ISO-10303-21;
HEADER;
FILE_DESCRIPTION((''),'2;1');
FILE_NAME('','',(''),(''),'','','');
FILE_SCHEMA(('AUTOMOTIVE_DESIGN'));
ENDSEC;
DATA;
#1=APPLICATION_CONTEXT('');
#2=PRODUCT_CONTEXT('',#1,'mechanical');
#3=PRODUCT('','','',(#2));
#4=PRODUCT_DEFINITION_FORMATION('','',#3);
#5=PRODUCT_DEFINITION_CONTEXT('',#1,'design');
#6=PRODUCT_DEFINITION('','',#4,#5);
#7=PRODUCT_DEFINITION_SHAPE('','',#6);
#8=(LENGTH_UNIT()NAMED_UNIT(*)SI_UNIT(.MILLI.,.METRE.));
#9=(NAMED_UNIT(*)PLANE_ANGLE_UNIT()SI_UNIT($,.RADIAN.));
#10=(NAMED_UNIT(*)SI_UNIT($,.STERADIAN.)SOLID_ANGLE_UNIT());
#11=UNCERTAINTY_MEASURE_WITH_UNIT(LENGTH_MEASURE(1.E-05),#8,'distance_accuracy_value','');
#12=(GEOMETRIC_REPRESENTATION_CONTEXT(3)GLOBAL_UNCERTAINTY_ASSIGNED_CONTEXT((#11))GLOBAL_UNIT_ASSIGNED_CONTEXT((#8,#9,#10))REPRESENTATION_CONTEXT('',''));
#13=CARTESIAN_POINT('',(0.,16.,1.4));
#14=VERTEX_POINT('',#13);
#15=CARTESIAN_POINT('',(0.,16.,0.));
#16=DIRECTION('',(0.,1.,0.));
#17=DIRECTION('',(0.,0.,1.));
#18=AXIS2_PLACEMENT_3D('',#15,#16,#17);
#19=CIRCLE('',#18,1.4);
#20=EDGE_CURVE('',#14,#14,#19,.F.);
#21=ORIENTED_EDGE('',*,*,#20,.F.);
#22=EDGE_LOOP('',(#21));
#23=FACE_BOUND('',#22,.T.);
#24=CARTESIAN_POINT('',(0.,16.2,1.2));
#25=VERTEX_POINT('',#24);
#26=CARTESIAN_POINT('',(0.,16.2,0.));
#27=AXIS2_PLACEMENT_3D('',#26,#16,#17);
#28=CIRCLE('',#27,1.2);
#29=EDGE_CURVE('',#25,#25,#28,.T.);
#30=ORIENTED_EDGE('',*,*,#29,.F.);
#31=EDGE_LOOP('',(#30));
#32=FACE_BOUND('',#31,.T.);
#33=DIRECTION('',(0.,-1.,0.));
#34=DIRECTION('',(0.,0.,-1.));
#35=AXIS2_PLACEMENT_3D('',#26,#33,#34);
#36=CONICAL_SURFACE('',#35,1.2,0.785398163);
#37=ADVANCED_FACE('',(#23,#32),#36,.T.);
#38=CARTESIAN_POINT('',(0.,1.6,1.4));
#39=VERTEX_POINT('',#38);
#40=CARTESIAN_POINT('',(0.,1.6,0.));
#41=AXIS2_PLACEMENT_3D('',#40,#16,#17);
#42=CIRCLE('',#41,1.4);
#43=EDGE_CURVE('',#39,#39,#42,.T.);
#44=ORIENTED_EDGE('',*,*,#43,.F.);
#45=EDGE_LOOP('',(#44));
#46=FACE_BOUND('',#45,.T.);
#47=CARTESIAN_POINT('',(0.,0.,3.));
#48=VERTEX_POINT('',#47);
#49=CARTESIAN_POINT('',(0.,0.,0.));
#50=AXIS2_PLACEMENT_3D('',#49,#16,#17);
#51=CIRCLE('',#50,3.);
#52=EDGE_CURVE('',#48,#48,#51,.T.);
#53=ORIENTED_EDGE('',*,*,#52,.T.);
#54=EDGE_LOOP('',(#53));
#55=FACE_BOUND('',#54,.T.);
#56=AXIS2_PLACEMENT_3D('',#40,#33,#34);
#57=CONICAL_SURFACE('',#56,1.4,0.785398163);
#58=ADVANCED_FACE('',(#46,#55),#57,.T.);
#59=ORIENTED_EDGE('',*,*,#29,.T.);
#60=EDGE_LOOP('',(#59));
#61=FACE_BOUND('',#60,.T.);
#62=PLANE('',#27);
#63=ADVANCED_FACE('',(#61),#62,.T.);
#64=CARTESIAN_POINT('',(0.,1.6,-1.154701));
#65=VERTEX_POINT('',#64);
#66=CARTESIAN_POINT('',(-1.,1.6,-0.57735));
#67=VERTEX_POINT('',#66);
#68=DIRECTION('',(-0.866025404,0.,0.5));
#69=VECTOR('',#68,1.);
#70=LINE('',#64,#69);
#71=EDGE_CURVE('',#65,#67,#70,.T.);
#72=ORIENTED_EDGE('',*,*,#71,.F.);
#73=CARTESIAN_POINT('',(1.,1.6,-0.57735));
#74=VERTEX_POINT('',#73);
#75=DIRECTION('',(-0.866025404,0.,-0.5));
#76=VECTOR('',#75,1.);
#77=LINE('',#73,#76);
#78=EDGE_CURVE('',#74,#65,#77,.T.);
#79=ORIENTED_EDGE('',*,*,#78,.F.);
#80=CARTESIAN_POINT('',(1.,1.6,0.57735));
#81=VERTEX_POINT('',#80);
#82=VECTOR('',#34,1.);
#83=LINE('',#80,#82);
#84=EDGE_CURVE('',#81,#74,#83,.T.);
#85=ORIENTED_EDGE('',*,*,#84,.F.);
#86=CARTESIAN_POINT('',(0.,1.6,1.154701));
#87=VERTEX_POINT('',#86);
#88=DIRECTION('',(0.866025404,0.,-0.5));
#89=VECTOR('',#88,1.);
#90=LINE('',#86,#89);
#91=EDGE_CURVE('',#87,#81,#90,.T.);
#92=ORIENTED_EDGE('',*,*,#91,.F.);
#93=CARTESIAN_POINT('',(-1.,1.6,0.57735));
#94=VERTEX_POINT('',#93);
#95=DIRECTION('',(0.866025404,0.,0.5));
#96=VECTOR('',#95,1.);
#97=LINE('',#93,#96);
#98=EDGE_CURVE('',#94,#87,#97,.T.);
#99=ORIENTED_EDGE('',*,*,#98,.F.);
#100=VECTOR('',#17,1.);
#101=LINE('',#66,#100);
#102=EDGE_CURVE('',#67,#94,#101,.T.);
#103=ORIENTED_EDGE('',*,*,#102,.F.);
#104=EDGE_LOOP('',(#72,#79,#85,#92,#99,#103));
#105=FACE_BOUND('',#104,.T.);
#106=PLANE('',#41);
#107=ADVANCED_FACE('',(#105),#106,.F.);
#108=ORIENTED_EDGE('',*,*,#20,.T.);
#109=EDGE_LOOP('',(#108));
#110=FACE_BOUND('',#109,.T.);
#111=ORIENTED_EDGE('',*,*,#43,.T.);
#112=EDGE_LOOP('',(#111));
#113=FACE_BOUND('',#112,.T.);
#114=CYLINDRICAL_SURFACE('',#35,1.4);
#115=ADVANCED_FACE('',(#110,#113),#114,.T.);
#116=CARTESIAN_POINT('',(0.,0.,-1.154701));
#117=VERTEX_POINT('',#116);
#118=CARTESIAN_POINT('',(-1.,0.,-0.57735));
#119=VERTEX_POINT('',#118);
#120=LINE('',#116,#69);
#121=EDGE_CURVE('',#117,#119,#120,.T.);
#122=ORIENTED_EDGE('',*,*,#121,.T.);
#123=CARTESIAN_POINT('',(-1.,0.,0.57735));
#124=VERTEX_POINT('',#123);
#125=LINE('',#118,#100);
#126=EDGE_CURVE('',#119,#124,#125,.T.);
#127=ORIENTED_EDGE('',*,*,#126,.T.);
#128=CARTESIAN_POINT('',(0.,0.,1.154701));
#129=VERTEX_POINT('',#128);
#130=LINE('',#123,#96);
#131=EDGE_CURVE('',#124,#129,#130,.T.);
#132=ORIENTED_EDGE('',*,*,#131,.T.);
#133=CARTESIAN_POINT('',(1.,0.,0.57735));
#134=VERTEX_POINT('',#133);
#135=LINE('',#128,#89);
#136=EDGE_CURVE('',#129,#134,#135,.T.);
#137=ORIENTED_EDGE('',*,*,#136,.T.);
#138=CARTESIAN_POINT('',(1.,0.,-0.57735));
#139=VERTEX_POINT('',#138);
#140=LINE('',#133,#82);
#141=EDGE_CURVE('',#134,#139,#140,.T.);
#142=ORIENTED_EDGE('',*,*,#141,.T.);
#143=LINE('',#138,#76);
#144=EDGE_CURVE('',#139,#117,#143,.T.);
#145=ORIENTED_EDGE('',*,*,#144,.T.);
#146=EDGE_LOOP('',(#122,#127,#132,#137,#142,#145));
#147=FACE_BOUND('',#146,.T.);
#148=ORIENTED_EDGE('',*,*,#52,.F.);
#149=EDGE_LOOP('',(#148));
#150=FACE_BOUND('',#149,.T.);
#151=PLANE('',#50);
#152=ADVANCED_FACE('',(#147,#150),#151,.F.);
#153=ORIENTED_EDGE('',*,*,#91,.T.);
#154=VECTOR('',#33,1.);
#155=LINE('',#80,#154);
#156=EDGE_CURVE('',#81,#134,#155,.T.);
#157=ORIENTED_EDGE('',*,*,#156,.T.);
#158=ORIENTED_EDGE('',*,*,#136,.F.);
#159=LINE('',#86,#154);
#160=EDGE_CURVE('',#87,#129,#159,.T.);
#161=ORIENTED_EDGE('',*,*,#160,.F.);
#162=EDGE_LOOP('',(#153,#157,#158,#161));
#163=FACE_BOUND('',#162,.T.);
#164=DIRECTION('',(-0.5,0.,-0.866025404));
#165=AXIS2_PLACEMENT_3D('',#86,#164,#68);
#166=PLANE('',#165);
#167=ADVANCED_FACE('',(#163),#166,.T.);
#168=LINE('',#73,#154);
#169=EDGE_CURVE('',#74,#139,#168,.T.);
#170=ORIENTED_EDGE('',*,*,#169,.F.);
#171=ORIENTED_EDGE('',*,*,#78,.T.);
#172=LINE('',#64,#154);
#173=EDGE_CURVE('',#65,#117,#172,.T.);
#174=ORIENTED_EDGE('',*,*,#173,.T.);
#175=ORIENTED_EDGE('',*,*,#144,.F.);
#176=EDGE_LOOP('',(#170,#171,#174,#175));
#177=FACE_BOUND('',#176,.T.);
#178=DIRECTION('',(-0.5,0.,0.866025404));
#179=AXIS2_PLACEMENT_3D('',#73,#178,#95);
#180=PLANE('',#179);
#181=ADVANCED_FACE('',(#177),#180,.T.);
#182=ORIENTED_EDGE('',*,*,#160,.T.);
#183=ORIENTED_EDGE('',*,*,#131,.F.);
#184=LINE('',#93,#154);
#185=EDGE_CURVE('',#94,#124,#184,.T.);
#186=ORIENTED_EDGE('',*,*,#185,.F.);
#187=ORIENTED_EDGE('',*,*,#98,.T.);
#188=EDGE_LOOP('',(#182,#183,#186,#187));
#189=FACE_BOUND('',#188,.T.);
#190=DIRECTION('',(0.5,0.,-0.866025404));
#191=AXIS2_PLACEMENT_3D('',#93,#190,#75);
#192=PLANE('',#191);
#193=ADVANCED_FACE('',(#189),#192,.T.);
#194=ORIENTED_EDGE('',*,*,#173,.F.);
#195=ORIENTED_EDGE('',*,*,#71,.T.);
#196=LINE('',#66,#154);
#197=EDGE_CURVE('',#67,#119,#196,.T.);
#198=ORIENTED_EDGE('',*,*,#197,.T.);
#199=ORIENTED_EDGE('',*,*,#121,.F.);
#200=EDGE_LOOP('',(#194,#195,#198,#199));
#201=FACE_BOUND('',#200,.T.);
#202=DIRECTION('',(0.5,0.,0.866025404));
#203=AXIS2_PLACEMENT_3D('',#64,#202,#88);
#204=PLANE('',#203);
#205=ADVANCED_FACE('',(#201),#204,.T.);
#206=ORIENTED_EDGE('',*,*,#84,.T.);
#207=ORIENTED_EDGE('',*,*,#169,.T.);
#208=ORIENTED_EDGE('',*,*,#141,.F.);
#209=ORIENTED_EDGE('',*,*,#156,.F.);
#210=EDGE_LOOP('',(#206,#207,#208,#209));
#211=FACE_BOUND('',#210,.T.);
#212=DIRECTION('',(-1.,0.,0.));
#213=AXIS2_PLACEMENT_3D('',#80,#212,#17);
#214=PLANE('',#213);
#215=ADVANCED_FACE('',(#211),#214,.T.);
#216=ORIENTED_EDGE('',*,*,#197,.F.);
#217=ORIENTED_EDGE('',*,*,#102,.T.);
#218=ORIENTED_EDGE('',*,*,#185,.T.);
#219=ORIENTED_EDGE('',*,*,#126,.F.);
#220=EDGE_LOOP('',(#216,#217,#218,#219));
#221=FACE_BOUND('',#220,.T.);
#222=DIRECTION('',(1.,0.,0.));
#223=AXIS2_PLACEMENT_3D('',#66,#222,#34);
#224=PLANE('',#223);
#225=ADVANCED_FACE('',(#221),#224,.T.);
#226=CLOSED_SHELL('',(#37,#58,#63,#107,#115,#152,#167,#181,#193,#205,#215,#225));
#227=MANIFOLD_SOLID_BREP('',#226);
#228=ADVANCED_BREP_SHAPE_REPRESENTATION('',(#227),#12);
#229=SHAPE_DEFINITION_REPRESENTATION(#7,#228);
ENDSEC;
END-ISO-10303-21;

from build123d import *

# Parameters (mm, degrees)
SKETCH_1_R      = 3
EXTRUDE_1_DEPTH = 1.6
CHAMFER_1_SIZE  = 1.6
SKETCH_2_R      = 1.4
EXTRUDE_2_DEPTH = 14.6
CHAMFER_2_SIZE  = 0.2


with BuildPart() as part:
    # 草图1 → 凸台-拉伸1 (new body)
    with BuildSketch(Plane(origin=(0, 0, 0), x_dir=(1, 0, 0), z_dir=(0, 1, 0))):
        with Locations(Location((0, 0, 0), (0, 0, 270))):
            Circle(SKETCH_1_R)
        Polygon((0, -1.154700538), (1, -0.577350269), (1, 0.577350269), (0, 1.154700538), (-1, 0.577350269), (-1, -0.577350269), align=None, mode=Mode.SUBTRACT)
    extrude(amount=EXTRUDE_1_DEPTH)

    # 倒角1
    # the kernel refuses this chamfer: 1.6 mm, written as the material it takes off along each edge
    with BuildSketch(Plane(origin=(0, 1.6, 0), x_dir=(0, 0, 1), z_dir=(-1, 0, 0))) as chamfer_1_piece_1:
        Polygon((3, -CHAMFER_1_SIZE), (3 - CHAMFER_1_SIZE, 0), (3, 0), align=None)
    revolve(axis=Axis((0, 1.6, 0), (0, 1, 0)), mode=Mode.SUBTRACT)

    # 草图2 → 凸台-拉伸2 (add)
    with BuildSketch(Plane(origin=(0, 1.6, 0), x_dir=(1, 0, 0), z_dir=(0, 1, 0))):
        with Locations(Location((0, 0, 0), (0, 0, 270))):
            Circle(SKETCH_2_R)
    extrude(amount=EXTRUDE_2_DEPTH)

    # 倒角2
    chamfer_2_edges = [part.edges().sort_by_distance(p)[0] for p in [
        (0, 16.2, -1.4),
    ]]
    chamfer(chamfer_2_edges, length=CHAMFER_2_SIZE)


solid = part.part
